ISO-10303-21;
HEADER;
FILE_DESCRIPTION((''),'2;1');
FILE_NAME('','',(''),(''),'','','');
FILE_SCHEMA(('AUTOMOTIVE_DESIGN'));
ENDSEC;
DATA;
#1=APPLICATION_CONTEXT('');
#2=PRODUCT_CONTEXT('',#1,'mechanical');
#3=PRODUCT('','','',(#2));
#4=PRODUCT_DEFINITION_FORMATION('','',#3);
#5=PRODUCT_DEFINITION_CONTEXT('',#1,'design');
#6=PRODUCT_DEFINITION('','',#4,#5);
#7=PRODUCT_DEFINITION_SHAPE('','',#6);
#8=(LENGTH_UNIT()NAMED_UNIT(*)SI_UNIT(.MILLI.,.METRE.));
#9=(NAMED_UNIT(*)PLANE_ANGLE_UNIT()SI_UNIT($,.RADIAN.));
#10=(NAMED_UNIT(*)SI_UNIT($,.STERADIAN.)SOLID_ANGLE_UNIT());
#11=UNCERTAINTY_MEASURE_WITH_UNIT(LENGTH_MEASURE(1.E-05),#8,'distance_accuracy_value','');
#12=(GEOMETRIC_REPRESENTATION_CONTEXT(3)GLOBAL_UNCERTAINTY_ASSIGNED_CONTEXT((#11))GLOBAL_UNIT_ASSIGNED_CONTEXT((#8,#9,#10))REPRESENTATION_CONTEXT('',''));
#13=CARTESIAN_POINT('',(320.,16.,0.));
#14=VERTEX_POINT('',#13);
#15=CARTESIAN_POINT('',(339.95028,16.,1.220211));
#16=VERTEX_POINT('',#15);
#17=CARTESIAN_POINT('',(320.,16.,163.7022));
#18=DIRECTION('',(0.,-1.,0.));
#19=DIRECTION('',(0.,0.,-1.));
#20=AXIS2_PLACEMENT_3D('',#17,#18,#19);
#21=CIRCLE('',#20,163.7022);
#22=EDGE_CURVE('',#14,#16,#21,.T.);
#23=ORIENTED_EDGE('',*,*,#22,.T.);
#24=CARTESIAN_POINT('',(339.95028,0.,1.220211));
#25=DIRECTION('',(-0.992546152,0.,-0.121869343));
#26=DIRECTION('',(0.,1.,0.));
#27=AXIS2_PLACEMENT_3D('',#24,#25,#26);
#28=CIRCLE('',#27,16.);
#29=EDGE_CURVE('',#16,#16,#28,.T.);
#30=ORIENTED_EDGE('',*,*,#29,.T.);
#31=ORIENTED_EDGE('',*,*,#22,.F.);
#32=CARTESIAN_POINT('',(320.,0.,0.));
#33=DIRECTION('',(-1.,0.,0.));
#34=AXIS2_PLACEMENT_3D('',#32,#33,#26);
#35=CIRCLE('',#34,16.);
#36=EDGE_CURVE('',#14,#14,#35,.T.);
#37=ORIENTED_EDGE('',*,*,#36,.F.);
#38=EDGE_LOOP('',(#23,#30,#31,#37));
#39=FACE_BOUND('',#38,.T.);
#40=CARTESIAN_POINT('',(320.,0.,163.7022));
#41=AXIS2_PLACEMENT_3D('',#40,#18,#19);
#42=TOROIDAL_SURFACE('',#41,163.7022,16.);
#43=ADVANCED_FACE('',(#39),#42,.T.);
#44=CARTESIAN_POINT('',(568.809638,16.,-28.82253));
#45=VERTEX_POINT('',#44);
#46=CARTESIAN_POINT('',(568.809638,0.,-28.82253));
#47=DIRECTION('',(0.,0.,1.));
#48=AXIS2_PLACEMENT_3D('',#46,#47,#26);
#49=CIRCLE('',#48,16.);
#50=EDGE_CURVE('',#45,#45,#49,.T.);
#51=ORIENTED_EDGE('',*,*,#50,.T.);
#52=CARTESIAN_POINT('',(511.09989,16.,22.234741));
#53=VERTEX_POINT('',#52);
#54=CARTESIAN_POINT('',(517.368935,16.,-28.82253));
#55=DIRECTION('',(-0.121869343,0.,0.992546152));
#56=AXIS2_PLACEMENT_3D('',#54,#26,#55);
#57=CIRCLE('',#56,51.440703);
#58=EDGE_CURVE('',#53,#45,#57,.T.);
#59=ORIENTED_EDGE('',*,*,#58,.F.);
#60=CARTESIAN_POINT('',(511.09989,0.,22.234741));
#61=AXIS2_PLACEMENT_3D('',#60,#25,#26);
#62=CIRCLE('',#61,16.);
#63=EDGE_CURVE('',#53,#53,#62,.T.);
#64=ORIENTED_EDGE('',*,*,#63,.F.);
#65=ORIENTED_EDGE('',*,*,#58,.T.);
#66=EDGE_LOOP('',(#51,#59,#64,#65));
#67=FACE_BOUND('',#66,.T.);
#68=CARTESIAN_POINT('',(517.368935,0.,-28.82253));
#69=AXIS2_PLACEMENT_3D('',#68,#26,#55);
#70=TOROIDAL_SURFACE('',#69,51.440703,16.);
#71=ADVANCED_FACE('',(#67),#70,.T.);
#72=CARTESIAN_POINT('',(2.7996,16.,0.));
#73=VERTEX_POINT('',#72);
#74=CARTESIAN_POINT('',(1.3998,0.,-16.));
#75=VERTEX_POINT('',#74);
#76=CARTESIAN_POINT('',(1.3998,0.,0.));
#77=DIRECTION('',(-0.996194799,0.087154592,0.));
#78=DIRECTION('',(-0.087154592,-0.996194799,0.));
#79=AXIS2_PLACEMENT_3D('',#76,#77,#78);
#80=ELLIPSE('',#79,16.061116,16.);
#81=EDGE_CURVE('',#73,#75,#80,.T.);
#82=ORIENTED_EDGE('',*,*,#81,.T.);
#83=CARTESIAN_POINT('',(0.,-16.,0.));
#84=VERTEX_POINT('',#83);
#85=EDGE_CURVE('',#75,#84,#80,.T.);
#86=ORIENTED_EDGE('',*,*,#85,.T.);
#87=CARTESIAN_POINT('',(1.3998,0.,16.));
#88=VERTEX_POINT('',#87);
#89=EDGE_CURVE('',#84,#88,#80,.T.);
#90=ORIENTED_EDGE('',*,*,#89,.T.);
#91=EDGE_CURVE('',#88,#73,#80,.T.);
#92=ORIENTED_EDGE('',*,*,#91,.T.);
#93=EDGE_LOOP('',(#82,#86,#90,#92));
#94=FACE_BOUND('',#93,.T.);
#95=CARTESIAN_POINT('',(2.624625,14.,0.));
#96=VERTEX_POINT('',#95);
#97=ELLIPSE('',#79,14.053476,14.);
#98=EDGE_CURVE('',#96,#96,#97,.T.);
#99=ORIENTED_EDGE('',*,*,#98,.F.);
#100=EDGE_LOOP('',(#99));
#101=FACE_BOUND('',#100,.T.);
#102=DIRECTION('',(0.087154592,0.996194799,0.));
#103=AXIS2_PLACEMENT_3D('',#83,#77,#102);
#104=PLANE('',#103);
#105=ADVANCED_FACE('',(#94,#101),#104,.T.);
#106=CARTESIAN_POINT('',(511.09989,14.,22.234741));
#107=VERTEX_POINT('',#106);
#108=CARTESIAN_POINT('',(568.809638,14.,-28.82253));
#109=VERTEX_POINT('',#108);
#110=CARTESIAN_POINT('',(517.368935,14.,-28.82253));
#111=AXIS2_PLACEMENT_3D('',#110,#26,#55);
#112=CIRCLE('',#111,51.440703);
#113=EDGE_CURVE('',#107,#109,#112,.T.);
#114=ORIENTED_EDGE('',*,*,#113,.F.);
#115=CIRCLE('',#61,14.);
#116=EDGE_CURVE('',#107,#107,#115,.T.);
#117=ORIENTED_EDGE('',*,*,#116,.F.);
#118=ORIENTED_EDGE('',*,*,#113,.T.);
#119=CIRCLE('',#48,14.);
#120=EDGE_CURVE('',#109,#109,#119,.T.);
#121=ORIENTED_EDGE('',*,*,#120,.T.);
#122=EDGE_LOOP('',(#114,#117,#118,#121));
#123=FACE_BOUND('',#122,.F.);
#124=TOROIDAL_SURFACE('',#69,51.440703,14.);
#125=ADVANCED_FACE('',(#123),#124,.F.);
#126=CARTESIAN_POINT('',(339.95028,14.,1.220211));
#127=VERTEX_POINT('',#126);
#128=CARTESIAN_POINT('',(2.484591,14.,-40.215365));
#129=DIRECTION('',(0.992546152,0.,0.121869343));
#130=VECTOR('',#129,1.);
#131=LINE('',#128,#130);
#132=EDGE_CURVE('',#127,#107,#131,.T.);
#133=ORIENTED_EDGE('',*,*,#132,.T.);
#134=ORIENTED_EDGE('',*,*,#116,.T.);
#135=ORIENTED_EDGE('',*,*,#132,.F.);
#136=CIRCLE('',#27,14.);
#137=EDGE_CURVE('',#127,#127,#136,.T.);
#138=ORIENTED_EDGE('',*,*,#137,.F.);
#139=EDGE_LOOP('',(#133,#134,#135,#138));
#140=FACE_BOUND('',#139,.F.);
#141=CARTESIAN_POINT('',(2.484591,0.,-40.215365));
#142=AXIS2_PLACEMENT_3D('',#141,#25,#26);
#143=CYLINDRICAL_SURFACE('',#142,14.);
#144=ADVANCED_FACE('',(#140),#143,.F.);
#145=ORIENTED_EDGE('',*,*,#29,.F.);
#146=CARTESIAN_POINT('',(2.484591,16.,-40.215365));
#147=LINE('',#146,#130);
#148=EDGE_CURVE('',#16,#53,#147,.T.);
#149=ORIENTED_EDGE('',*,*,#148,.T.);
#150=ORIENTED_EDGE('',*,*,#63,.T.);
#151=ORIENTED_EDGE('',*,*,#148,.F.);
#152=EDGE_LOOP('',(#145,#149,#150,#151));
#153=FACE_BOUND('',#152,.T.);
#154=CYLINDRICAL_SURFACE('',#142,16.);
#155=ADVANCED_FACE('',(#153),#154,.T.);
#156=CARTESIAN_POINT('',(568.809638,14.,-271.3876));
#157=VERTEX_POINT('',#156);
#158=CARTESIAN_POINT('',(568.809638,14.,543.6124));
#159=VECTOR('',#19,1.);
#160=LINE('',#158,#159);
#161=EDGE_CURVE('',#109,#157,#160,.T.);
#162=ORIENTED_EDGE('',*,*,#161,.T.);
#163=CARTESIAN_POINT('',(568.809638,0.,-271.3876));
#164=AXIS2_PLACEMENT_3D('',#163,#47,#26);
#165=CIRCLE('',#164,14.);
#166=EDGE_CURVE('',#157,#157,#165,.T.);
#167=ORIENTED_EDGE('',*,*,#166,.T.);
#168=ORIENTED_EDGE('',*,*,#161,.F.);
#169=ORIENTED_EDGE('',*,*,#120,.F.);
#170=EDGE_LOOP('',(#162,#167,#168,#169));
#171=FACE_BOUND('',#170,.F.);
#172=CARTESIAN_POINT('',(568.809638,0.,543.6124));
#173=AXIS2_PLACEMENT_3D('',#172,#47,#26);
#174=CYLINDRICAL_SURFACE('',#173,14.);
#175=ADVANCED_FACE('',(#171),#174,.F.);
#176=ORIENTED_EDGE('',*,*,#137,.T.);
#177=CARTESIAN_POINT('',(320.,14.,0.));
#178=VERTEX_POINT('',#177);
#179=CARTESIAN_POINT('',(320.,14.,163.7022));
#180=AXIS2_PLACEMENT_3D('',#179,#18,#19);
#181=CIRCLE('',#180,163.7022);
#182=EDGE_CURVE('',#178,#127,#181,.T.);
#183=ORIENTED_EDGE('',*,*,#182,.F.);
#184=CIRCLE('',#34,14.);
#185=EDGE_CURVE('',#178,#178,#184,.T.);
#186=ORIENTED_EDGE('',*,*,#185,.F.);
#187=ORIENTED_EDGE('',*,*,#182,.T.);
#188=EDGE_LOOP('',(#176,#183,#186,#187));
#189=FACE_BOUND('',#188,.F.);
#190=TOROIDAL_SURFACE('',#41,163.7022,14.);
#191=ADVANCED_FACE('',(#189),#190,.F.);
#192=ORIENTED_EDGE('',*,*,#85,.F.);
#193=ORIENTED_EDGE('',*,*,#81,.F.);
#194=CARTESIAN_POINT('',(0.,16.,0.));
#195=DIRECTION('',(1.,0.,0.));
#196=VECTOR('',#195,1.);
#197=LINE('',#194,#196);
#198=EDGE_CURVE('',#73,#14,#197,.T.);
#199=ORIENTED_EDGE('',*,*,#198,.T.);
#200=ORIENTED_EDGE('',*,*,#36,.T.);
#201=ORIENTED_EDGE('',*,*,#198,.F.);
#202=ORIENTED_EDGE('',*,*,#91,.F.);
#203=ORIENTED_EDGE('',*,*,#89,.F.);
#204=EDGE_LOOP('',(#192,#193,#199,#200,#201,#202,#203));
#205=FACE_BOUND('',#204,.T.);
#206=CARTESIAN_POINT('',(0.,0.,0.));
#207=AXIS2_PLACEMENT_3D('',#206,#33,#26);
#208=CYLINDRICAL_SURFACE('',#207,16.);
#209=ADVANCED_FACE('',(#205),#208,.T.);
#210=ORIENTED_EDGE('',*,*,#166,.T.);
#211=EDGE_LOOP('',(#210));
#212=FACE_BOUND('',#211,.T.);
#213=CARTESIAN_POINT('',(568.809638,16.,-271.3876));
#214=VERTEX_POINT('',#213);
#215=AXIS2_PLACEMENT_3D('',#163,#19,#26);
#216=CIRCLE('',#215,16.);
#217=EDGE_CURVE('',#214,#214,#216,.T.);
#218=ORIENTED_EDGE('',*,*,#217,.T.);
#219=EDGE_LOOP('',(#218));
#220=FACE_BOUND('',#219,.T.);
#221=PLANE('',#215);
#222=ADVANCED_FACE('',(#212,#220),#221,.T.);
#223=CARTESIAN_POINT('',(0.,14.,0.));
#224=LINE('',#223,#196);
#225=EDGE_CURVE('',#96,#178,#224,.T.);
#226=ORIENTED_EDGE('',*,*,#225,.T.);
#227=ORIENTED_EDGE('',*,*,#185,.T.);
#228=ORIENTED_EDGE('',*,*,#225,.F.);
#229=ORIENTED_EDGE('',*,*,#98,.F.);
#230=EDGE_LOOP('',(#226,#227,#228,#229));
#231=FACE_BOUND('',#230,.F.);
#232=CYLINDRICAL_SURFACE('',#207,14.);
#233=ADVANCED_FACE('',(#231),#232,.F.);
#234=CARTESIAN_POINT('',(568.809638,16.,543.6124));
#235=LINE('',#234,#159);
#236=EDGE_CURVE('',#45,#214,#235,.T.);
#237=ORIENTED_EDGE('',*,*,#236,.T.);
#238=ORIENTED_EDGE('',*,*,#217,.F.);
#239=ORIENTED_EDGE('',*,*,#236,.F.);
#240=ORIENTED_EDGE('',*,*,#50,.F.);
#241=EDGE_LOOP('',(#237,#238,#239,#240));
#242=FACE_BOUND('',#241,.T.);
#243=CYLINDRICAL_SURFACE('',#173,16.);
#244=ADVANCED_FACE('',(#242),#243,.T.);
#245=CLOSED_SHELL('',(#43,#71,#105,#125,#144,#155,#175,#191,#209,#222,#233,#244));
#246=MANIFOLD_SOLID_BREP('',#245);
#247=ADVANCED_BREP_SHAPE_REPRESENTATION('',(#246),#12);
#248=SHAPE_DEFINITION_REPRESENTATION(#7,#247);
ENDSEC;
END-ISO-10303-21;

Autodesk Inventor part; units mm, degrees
ref_plane "YZ Plane" through (0, 0, 0) normal (1, 0, 0) x (0, 1, 0)
ref_plane "XZ Plane" through (0, 0, 0) normal (0, 1, 0) x (-1, 0, 0)
sketch "Szkic1" plane through (0, 0, 0) normal (1, 0, 0) x (0, 1, 0)
  circle A0 centre (0, 0) radius 16
  dimension "d0" = 32
extrude "Wyciągnięcie proste1" add sketch "Szkic1" along normal blind 815
shell "Skorupa1" thickness 2 removed faces 2 at (815, 4.7224, 2.4785) at (0, 4.7224, 2.4785)
sketch "Szkic4" plane through (0, 0, 0) normal (0, 0, 1) x (1, 0, 0)
  line L0 (320, 29.1092) -> (320, -35.5658)
  line L1 (0, 16) -> (0, -16) projected
  point P0 (0, 0)
  dimension "d8" = 320
bend part "Gięcie części1" radius 163.7022 angle 7 line through (320, 29.1092, 0) along (0, -1, 0) centre toward (0, 0, 1) moving side (1, 0, 0) both sides no
sketch "Szkic7" plane through (811.4097, 0, 59.1081) normal (0.9925462, 0, 0.1218693) x (0.1218693, 0, -0.9925462)
  circle A0 centre (0, 0) radius 14 projected
  circle A1 centre (0, 0) radius 16 projected
  point P0 (-40.2184, 0)
  point P1 (16, 0)
ref_plane "Płaszczyzna konstrukcyjna4" through (813.3596, 0, 43.2274) normal (0.1218693, 0, -0.9925462) x (0, 1, 0)
sketch "Szkic8" plane through (813.3596, 0, 43.2274) normal (0.1218693, 0, -0.9925462) x (0, 1, 0)
  line L0 (-19.5179, -302.5651) -> (38.9, -302.5651)
  ellipse E0 centre (0, -812.5651) end of major axis (-16, -812.5651) minor radius 1.9499 projected
  dimension "d15" = 510
bend part "Gięcie części2" radius 35.4407 angle 97 line through (513.0498, -19.5179, 6.354) along (0, 1, 0) centre toward (0.1218693, 0, -0.9925462) moving side (0.9925462, 0, 0.1218693) both sides no
sketch "Szkic9" plane through (0, 0, 0) normal (0, 0, 1) x (1, 0, 0)
  line L0 (0, 16) -> (0, -16) construction
  line L1 (0, 16) -> (320, 16) construction
  line L2 (0, -16) -> (2.7996, 16)
  line L3 (2.7996, 16) -> (0, 16)
  line L4 (0, 16) -> (0, -16)
  point P0 (0, 0)
  dimension "d18" = 5
extrude "Wyciągnięcie proste3" cut sketch "Szkic9" along normal mid plane 32
equation "\"PromieńGięcia\" = Grubość"
equation "\"SzerokośćGięciaPodcięcia\" = Grubość"
equation "\"GłębokośćGięciaPodcięcia\" = 0.5 * Grubość"
equation "\"RozmiarPodcięciaNarożnika\" = 4 * Grubość"
equation "\"MinimalnaPozostałość\" = 2 * Grubość"
equation "\"PromieńPrzejścia\" = PromieńGięcia"
equation "\"Rozmiar_promienia_Jacobiego\" = Grubość"
equation "\"Wielk_odstępu\" = Grubość"
equation "\"Grubość\" = 0.5"
properties part number "Rura_wzdłużna_ergosiedziska" material "Aluminium AW-7020"
